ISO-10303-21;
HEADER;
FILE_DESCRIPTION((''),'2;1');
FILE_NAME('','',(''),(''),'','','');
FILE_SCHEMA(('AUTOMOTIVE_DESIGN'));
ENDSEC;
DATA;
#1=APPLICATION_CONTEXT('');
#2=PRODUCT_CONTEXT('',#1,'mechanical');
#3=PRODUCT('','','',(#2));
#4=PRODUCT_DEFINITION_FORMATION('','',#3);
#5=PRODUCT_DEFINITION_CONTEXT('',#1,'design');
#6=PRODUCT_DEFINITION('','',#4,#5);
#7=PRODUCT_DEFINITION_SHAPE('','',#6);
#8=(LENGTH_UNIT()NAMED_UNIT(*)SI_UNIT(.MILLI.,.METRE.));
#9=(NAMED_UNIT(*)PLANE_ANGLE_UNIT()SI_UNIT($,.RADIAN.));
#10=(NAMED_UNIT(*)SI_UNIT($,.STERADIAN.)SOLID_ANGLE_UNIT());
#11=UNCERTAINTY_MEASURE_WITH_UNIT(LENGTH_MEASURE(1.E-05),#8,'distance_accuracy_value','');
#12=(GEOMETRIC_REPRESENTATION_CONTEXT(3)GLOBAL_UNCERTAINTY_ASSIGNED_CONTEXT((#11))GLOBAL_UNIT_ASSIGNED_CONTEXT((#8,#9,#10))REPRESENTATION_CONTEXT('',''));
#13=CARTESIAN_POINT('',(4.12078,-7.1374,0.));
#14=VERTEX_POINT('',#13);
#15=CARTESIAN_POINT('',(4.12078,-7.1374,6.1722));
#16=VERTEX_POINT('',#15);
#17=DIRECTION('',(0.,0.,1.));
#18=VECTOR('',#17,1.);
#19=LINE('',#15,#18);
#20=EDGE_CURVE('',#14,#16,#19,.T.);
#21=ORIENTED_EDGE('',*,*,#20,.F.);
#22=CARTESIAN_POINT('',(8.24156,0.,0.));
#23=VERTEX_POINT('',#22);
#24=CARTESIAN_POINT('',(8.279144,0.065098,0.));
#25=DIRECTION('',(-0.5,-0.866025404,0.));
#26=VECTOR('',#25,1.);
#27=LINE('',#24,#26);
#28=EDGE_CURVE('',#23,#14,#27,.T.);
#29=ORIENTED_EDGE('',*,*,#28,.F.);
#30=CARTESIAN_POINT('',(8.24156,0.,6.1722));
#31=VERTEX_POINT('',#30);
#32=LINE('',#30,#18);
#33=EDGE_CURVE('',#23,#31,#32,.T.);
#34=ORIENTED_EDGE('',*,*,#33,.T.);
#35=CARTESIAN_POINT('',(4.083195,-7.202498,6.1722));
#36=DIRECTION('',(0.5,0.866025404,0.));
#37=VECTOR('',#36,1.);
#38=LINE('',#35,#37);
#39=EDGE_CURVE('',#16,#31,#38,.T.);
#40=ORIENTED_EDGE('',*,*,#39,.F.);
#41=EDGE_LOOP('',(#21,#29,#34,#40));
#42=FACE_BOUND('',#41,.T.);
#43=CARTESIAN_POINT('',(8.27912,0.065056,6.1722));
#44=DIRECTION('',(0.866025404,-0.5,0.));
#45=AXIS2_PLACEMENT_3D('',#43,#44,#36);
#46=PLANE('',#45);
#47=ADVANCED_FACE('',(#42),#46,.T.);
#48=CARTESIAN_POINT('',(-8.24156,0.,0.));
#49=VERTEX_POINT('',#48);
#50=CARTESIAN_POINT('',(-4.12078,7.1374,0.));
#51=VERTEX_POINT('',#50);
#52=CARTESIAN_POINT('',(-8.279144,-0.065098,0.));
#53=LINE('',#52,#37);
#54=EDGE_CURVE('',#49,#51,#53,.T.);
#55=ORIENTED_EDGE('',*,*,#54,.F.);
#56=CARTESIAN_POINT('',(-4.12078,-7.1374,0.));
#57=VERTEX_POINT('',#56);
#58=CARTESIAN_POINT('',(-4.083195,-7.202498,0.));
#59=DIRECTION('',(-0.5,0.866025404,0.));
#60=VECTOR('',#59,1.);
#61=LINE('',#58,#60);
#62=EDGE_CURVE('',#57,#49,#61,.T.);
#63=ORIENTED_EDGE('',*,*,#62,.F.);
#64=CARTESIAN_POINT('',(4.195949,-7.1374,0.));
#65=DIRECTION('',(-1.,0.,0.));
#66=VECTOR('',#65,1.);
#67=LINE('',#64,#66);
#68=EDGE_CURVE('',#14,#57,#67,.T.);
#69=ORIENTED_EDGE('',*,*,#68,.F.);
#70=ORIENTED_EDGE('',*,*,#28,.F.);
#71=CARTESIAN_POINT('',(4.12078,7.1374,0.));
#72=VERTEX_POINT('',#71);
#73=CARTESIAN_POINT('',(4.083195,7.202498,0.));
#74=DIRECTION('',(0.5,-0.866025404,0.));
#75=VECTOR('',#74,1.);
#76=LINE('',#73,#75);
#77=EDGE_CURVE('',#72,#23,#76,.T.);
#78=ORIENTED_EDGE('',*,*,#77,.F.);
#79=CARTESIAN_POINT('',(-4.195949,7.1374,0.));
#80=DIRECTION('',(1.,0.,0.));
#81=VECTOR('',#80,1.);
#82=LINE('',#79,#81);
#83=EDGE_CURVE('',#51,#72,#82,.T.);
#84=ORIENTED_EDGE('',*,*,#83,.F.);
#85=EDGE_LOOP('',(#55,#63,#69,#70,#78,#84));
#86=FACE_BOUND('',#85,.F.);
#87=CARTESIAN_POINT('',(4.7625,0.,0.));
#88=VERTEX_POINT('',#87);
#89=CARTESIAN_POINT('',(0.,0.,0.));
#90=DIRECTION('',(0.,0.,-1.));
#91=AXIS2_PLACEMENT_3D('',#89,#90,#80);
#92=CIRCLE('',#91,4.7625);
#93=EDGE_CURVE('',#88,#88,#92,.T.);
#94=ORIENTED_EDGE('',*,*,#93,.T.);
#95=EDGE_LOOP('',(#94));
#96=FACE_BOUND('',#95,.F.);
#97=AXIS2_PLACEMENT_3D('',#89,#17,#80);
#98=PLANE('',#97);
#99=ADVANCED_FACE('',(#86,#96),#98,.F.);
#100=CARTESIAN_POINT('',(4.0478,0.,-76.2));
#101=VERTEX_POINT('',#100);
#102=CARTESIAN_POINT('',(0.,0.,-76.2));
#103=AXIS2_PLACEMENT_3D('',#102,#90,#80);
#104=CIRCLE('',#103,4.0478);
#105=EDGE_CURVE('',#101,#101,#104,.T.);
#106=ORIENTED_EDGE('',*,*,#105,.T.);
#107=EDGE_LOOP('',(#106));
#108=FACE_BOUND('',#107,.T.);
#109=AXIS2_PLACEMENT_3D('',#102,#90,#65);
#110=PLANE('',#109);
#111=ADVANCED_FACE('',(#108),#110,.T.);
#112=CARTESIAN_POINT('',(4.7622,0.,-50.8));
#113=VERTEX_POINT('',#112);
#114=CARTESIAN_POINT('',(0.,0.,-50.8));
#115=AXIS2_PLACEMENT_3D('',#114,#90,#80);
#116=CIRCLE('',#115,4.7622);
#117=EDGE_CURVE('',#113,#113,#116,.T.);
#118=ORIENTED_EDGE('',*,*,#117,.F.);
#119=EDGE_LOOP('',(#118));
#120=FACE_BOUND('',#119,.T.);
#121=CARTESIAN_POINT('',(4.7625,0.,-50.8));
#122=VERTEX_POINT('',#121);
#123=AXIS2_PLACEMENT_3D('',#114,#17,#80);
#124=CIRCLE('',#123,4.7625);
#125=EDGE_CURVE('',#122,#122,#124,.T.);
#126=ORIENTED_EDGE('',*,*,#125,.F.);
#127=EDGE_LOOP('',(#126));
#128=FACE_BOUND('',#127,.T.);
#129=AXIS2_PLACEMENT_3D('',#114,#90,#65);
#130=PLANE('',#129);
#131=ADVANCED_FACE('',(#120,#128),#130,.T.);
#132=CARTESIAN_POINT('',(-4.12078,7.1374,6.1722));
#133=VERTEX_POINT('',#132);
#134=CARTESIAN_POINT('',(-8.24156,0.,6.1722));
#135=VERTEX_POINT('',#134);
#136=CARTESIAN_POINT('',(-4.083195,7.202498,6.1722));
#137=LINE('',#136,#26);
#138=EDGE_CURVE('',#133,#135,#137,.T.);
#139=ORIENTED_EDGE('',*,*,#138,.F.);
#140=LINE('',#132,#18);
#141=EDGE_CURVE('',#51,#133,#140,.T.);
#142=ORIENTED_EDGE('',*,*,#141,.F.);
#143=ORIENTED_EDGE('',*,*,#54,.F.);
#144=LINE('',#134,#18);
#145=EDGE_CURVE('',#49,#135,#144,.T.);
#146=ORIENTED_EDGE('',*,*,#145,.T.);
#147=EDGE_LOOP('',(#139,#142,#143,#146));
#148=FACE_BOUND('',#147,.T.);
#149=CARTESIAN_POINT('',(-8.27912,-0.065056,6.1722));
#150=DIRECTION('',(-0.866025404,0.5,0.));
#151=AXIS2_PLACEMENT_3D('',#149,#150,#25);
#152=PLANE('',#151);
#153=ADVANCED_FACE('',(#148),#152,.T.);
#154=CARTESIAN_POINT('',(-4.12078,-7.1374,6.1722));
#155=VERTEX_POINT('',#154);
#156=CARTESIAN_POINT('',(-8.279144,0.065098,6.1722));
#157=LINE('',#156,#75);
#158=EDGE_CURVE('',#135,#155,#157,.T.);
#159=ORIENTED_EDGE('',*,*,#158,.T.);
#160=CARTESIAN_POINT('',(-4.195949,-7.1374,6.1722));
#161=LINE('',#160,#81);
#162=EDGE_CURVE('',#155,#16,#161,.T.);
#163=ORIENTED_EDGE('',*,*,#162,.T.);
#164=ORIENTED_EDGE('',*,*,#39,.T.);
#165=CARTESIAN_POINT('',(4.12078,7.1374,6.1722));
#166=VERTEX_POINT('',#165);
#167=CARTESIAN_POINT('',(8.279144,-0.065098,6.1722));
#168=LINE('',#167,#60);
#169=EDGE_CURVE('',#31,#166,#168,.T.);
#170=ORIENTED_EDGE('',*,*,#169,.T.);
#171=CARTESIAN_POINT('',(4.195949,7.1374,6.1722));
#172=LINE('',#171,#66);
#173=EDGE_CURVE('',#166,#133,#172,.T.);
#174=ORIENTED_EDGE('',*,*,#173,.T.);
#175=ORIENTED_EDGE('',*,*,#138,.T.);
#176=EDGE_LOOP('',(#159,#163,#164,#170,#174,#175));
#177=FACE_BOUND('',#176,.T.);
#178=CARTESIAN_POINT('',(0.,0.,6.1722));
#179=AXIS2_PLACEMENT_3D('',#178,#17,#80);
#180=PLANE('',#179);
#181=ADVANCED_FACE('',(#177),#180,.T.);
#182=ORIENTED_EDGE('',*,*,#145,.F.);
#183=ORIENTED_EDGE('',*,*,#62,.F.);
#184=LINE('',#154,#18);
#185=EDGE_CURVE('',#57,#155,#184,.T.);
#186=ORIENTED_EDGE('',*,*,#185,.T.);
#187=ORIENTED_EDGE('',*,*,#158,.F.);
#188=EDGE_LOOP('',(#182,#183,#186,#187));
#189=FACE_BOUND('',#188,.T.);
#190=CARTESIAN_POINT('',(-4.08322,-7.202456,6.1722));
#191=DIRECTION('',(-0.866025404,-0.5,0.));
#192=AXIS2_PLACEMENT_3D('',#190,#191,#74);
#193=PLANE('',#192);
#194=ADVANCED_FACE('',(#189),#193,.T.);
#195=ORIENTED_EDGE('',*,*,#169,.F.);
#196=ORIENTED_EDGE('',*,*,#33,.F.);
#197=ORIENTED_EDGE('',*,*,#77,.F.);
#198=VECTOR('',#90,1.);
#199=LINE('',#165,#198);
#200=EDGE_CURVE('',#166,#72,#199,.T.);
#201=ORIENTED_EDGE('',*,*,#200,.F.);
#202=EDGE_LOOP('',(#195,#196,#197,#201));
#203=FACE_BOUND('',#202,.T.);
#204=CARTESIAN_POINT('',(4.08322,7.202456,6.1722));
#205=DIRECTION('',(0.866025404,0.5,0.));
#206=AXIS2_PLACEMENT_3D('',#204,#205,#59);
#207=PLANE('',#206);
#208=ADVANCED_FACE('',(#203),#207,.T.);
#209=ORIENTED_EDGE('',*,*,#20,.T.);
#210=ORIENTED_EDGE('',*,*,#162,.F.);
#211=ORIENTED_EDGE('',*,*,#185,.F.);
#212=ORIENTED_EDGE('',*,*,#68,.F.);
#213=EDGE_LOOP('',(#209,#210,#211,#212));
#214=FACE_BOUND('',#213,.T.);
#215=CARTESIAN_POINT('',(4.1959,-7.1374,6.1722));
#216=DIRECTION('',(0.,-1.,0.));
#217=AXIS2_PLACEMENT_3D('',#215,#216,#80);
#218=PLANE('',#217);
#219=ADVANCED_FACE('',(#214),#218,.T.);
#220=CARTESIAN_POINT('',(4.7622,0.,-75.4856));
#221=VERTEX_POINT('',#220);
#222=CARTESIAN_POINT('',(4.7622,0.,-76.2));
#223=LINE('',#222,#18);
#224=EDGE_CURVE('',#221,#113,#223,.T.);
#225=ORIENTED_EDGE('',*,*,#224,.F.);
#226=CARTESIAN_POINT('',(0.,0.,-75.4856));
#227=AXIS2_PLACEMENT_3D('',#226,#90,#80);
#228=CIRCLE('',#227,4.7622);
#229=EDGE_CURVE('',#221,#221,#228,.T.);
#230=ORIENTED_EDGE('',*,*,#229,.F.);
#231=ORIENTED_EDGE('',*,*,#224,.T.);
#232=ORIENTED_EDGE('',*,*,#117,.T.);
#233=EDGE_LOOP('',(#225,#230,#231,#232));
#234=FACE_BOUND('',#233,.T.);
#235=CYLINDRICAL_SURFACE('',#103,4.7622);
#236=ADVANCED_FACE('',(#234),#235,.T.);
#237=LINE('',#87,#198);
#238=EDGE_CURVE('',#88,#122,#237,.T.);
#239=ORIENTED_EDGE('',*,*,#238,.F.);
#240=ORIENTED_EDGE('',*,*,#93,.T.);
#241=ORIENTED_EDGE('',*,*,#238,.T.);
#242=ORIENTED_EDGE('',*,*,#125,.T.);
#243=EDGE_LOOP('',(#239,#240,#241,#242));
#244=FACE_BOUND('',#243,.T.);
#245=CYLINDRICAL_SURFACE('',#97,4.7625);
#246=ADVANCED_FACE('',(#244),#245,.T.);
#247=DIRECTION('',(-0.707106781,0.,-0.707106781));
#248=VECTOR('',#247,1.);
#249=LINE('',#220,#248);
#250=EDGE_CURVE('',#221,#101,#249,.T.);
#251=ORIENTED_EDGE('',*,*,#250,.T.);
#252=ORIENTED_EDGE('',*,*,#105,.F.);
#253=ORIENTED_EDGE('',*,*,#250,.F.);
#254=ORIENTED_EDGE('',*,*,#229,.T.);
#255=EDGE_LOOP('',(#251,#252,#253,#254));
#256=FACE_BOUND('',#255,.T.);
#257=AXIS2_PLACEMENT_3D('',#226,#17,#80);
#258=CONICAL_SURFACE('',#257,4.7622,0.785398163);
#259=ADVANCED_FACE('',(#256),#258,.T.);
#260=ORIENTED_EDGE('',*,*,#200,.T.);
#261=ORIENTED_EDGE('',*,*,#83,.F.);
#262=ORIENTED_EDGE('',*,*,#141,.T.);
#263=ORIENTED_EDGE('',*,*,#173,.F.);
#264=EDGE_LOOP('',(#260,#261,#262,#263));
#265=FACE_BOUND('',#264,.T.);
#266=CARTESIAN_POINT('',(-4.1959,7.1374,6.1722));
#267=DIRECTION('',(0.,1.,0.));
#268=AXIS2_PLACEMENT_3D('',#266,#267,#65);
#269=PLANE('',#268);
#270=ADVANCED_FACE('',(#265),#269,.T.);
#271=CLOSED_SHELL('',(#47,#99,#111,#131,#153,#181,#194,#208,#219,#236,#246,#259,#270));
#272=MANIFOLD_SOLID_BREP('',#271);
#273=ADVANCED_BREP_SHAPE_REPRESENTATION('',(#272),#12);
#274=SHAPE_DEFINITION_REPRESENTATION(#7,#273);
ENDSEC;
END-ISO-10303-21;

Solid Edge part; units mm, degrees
sketch "Sketch1" plane through (0, 0, 0) normal (0, 0, 1) x (1, 0, 0)
  circle A0 centre (0, 0) radius 8.2794
  dimension "D1" = 16.5588
extrude "Protrusion1" add sketch "Sketch1" along normal blind 6.1722
sketch "Sketch2" plane through (0, 0, 0) normal (0, 0, -1) x (1, 0, 0)
  circle A0 centre (0, 0) radius 4.7625
extrude "Protrusion2" add sketch "Sketch2" along normal blind 76.2
sketch "Sketch3" plane through (0, 0, -76.2) normal (0, 0, -1) x (1, 0, 0)
  circle A0 centre (0, 0) radius 4.7622
extrude "Cutout1" cut sketch "Sketch3" against normal blind 25.4 flip side to cut
chamfer "Chamfer_1" distance 0.7144 angle 45 1 edges at (-4.7622, 0, -76.2)
sketch "Sketch4" plane through (0, 0, 6.1722) normal (0, 0, 1) x (1, 0, 0)
  line L0 (-4.1959, 7.1374) -> (4.1959, 7.1374)
  dimension "D1" = 14.2748
extrude "Cutout2" cut sketch "Sketch4" against normal up to next material side at (0, 7.1874, 6.1722)
pattern_circular "Pattern1" count 6 over 360 about axis through (0, 0, 6.1722) along (0, 0, 1) of "Cutout2"
properties part number "24107274"
